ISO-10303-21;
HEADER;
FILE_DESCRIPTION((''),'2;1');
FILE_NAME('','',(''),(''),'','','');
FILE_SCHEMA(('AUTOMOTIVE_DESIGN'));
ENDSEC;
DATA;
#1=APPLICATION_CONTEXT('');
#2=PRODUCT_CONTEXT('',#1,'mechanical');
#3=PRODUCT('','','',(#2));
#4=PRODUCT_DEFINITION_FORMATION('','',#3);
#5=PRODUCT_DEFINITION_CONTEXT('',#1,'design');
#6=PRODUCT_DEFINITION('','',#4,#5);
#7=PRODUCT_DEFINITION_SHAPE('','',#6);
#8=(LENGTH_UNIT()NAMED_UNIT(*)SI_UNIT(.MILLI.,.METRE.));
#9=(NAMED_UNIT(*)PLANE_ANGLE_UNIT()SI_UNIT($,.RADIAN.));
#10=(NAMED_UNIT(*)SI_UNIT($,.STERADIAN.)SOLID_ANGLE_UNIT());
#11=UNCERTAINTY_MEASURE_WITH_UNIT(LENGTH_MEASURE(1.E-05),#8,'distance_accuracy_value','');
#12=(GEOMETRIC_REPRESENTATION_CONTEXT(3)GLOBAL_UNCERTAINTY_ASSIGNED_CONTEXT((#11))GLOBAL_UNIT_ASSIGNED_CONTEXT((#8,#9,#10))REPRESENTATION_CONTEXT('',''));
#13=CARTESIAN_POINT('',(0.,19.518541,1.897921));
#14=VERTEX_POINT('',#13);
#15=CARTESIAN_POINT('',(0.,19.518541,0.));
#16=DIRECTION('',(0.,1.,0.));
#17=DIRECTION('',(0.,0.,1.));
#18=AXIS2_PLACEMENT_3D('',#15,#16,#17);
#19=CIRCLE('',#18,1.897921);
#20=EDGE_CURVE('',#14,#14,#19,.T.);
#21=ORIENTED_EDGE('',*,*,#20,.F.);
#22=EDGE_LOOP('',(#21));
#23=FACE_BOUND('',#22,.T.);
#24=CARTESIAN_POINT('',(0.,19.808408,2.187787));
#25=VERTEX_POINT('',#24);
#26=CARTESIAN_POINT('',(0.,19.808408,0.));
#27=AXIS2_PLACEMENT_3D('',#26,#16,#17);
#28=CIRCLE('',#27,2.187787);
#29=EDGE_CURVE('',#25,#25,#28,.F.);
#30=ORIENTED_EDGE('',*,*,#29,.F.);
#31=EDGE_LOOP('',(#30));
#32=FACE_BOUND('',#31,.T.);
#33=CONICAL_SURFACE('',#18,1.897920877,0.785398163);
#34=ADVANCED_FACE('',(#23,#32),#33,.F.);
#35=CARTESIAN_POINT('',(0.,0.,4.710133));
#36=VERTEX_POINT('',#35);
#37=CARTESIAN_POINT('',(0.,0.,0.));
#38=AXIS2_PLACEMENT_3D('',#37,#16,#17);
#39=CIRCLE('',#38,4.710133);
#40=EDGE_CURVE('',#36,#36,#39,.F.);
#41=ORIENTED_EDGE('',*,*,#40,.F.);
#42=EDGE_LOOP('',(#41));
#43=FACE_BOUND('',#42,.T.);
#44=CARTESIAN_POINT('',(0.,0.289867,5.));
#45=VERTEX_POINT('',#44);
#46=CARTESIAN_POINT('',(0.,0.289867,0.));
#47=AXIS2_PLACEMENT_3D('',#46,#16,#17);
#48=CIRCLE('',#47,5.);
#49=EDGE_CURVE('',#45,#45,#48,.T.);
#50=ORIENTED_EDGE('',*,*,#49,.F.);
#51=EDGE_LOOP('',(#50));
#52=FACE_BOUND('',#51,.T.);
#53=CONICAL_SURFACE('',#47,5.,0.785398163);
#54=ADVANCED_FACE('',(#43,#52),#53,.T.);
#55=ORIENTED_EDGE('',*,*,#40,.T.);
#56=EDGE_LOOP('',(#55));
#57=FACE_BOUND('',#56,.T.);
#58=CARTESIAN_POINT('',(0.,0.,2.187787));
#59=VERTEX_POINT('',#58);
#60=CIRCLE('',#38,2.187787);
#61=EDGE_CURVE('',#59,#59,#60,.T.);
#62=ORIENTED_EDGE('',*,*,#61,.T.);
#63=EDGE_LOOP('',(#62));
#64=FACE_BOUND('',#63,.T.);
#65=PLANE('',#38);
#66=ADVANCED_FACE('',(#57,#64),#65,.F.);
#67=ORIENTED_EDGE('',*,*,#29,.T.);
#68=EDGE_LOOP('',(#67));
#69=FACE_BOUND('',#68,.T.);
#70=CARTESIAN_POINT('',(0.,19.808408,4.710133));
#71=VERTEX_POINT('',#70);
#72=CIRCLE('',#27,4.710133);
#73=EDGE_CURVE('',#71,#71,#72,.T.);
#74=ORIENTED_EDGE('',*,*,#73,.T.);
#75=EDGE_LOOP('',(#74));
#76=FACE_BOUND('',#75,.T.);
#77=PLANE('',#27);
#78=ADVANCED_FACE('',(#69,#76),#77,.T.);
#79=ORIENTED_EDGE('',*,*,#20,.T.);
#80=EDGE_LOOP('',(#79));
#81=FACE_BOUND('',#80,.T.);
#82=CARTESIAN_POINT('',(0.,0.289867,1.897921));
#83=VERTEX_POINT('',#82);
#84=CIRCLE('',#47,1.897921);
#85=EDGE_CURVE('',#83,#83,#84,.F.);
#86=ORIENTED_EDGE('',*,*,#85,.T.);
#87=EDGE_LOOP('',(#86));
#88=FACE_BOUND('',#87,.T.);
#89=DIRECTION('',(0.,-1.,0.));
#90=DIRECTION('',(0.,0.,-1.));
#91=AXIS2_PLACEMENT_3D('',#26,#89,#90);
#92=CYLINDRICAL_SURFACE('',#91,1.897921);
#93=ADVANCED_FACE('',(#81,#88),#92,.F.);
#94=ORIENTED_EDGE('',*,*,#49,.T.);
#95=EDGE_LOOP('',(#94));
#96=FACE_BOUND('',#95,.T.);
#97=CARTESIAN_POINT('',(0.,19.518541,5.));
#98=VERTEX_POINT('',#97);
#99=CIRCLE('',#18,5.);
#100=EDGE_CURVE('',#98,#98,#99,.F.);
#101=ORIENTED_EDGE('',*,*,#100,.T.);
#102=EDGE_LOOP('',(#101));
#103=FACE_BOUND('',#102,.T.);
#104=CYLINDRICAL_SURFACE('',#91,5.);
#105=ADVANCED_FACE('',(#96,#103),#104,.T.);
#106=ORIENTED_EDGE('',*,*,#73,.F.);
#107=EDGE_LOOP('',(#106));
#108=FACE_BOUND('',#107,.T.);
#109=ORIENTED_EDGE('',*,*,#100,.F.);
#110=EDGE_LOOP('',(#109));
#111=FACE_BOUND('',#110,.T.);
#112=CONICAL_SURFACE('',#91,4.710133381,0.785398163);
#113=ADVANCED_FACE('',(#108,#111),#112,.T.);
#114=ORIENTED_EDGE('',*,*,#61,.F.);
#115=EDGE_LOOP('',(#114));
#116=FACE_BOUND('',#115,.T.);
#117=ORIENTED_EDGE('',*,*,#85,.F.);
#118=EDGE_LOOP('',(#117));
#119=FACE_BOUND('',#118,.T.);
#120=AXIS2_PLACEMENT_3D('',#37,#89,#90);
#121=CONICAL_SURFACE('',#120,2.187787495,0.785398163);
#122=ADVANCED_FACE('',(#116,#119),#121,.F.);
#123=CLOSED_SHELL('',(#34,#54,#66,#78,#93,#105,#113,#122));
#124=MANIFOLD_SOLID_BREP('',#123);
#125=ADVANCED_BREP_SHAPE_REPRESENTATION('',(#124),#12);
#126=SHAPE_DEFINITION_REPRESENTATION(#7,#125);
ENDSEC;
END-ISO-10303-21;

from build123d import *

# Parameters (mm, degrees)
SKETCH1_R           = 5
BOSS_EXTRUDE1_DEPTH = 19.808407926
SKETCH2_R           = 1.897920877
CUT_EXTRUDE1_DEPTH  = 22.032665655
CHAMFER1_SIZE       = 0.289866619


with BuildPart() as part:
    # Sketch1 → Boss-Extrude1 (new body)
    with BuildSketch(Plane(origin=(0, 0, 0), x_dir=(1, 0, 0), z_dir=(0, 1, 0))):
        Circle(SKETCH1_R)
    extrude(amount=BOSS_EXTRUDE1_DEPTH)

    # Sketch2 → Cut-Extrude1 (cut, through all)
    with BuildSketch(Plane(origin=(0, 0, 0), x_dir=(1, 0, 0), z_dir=(0, 1, 0))):
        Circle(SKETCH2_R)
    extrude(amount=CUT_EXTRUDE1_DEPTH, mode=Mode.SUBTRACT)

    # Chamfer1
    chamfer1_edges = [part.edges().sort_by_distance(p)[0] for p in [
        (-1.897920877, 19.808407926, 0),
        (-1.897920877, 0, 0),
        (-5, 0, 0),
        (-5, 19.808407926, 0),
    ]]
    chamfer(chamfer1_edges, length=CHAMFER1_SIZE)


solid = part.part
